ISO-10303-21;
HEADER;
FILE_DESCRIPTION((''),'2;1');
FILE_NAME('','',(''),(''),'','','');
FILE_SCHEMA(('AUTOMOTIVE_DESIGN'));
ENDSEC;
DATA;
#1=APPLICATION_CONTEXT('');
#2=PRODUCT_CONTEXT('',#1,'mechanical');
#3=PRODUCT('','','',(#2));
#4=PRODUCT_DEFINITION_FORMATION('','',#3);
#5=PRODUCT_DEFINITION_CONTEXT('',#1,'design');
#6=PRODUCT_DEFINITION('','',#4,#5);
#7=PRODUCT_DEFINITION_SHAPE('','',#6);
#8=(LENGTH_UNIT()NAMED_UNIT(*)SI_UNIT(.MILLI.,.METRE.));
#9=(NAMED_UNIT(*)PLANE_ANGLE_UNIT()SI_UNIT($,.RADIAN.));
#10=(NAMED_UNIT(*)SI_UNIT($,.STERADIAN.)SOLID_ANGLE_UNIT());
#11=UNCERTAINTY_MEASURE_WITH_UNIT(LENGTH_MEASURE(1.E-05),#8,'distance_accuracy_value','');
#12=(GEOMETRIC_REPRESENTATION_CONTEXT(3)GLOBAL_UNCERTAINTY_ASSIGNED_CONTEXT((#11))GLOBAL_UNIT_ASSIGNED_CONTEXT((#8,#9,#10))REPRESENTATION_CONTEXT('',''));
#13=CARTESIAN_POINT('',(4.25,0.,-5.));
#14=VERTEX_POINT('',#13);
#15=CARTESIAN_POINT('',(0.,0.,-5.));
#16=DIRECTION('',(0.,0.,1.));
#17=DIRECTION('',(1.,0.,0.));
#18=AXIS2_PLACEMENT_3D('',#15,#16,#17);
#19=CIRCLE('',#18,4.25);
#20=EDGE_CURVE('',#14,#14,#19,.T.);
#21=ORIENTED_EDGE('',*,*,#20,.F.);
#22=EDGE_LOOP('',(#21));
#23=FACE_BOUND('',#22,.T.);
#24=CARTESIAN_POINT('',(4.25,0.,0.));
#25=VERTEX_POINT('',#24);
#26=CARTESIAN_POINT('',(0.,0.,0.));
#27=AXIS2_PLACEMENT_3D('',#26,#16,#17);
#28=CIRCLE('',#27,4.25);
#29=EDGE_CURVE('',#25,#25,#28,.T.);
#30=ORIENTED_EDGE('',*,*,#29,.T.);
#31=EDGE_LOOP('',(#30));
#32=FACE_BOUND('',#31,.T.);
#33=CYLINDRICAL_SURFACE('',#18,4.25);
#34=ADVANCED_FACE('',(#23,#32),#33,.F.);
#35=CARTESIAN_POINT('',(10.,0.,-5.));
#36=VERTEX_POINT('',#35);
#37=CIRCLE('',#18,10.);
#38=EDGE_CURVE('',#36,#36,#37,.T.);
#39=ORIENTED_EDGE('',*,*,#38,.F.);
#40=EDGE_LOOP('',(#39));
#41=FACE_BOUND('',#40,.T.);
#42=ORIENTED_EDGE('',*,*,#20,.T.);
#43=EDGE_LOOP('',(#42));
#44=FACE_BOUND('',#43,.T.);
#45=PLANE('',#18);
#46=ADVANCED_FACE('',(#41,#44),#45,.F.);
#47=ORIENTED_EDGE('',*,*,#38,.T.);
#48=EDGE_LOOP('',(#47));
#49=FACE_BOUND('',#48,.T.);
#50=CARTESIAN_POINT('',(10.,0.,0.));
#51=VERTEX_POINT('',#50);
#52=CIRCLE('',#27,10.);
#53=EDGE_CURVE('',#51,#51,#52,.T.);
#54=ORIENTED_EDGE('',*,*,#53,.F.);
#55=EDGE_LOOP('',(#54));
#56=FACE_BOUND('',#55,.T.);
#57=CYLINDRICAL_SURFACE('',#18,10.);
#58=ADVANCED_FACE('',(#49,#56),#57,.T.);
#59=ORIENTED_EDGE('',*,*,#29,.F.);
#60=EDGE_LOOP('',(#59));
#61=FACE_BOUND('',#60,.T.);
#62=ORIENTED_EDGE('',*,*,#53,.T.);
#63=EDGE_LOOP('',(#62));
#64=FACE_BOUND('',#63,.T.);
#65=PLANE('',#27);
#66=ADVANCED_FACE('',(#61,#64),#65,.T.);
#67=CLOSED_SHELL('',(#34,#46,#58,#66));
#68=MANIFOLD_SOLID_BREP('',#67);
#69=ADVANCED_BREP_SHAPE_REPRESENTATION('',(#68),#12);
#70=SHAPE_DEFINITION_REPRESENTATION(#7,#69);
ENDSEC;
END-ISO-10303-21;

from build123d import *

# Parameters (mm, degrees)
IZIM1_R            = 10
IZIM1_R_2          = 4.25
TABAN_FLAN_1_DEPTH = 5


# Sheet-metal steps are written as plain solids
with BuildPart() as part:
    # Çizim1 → Taban-Flanş1 (new body)
    with BuildSketch(Plane.XY):
        Circle(IZIM1_R)
        Circle(IZIM1_R_2, mode=Mode.SUBTRACT)
    extrude(amount=-TABAN_FLAN_1_DEPTH)


solid = part.part
